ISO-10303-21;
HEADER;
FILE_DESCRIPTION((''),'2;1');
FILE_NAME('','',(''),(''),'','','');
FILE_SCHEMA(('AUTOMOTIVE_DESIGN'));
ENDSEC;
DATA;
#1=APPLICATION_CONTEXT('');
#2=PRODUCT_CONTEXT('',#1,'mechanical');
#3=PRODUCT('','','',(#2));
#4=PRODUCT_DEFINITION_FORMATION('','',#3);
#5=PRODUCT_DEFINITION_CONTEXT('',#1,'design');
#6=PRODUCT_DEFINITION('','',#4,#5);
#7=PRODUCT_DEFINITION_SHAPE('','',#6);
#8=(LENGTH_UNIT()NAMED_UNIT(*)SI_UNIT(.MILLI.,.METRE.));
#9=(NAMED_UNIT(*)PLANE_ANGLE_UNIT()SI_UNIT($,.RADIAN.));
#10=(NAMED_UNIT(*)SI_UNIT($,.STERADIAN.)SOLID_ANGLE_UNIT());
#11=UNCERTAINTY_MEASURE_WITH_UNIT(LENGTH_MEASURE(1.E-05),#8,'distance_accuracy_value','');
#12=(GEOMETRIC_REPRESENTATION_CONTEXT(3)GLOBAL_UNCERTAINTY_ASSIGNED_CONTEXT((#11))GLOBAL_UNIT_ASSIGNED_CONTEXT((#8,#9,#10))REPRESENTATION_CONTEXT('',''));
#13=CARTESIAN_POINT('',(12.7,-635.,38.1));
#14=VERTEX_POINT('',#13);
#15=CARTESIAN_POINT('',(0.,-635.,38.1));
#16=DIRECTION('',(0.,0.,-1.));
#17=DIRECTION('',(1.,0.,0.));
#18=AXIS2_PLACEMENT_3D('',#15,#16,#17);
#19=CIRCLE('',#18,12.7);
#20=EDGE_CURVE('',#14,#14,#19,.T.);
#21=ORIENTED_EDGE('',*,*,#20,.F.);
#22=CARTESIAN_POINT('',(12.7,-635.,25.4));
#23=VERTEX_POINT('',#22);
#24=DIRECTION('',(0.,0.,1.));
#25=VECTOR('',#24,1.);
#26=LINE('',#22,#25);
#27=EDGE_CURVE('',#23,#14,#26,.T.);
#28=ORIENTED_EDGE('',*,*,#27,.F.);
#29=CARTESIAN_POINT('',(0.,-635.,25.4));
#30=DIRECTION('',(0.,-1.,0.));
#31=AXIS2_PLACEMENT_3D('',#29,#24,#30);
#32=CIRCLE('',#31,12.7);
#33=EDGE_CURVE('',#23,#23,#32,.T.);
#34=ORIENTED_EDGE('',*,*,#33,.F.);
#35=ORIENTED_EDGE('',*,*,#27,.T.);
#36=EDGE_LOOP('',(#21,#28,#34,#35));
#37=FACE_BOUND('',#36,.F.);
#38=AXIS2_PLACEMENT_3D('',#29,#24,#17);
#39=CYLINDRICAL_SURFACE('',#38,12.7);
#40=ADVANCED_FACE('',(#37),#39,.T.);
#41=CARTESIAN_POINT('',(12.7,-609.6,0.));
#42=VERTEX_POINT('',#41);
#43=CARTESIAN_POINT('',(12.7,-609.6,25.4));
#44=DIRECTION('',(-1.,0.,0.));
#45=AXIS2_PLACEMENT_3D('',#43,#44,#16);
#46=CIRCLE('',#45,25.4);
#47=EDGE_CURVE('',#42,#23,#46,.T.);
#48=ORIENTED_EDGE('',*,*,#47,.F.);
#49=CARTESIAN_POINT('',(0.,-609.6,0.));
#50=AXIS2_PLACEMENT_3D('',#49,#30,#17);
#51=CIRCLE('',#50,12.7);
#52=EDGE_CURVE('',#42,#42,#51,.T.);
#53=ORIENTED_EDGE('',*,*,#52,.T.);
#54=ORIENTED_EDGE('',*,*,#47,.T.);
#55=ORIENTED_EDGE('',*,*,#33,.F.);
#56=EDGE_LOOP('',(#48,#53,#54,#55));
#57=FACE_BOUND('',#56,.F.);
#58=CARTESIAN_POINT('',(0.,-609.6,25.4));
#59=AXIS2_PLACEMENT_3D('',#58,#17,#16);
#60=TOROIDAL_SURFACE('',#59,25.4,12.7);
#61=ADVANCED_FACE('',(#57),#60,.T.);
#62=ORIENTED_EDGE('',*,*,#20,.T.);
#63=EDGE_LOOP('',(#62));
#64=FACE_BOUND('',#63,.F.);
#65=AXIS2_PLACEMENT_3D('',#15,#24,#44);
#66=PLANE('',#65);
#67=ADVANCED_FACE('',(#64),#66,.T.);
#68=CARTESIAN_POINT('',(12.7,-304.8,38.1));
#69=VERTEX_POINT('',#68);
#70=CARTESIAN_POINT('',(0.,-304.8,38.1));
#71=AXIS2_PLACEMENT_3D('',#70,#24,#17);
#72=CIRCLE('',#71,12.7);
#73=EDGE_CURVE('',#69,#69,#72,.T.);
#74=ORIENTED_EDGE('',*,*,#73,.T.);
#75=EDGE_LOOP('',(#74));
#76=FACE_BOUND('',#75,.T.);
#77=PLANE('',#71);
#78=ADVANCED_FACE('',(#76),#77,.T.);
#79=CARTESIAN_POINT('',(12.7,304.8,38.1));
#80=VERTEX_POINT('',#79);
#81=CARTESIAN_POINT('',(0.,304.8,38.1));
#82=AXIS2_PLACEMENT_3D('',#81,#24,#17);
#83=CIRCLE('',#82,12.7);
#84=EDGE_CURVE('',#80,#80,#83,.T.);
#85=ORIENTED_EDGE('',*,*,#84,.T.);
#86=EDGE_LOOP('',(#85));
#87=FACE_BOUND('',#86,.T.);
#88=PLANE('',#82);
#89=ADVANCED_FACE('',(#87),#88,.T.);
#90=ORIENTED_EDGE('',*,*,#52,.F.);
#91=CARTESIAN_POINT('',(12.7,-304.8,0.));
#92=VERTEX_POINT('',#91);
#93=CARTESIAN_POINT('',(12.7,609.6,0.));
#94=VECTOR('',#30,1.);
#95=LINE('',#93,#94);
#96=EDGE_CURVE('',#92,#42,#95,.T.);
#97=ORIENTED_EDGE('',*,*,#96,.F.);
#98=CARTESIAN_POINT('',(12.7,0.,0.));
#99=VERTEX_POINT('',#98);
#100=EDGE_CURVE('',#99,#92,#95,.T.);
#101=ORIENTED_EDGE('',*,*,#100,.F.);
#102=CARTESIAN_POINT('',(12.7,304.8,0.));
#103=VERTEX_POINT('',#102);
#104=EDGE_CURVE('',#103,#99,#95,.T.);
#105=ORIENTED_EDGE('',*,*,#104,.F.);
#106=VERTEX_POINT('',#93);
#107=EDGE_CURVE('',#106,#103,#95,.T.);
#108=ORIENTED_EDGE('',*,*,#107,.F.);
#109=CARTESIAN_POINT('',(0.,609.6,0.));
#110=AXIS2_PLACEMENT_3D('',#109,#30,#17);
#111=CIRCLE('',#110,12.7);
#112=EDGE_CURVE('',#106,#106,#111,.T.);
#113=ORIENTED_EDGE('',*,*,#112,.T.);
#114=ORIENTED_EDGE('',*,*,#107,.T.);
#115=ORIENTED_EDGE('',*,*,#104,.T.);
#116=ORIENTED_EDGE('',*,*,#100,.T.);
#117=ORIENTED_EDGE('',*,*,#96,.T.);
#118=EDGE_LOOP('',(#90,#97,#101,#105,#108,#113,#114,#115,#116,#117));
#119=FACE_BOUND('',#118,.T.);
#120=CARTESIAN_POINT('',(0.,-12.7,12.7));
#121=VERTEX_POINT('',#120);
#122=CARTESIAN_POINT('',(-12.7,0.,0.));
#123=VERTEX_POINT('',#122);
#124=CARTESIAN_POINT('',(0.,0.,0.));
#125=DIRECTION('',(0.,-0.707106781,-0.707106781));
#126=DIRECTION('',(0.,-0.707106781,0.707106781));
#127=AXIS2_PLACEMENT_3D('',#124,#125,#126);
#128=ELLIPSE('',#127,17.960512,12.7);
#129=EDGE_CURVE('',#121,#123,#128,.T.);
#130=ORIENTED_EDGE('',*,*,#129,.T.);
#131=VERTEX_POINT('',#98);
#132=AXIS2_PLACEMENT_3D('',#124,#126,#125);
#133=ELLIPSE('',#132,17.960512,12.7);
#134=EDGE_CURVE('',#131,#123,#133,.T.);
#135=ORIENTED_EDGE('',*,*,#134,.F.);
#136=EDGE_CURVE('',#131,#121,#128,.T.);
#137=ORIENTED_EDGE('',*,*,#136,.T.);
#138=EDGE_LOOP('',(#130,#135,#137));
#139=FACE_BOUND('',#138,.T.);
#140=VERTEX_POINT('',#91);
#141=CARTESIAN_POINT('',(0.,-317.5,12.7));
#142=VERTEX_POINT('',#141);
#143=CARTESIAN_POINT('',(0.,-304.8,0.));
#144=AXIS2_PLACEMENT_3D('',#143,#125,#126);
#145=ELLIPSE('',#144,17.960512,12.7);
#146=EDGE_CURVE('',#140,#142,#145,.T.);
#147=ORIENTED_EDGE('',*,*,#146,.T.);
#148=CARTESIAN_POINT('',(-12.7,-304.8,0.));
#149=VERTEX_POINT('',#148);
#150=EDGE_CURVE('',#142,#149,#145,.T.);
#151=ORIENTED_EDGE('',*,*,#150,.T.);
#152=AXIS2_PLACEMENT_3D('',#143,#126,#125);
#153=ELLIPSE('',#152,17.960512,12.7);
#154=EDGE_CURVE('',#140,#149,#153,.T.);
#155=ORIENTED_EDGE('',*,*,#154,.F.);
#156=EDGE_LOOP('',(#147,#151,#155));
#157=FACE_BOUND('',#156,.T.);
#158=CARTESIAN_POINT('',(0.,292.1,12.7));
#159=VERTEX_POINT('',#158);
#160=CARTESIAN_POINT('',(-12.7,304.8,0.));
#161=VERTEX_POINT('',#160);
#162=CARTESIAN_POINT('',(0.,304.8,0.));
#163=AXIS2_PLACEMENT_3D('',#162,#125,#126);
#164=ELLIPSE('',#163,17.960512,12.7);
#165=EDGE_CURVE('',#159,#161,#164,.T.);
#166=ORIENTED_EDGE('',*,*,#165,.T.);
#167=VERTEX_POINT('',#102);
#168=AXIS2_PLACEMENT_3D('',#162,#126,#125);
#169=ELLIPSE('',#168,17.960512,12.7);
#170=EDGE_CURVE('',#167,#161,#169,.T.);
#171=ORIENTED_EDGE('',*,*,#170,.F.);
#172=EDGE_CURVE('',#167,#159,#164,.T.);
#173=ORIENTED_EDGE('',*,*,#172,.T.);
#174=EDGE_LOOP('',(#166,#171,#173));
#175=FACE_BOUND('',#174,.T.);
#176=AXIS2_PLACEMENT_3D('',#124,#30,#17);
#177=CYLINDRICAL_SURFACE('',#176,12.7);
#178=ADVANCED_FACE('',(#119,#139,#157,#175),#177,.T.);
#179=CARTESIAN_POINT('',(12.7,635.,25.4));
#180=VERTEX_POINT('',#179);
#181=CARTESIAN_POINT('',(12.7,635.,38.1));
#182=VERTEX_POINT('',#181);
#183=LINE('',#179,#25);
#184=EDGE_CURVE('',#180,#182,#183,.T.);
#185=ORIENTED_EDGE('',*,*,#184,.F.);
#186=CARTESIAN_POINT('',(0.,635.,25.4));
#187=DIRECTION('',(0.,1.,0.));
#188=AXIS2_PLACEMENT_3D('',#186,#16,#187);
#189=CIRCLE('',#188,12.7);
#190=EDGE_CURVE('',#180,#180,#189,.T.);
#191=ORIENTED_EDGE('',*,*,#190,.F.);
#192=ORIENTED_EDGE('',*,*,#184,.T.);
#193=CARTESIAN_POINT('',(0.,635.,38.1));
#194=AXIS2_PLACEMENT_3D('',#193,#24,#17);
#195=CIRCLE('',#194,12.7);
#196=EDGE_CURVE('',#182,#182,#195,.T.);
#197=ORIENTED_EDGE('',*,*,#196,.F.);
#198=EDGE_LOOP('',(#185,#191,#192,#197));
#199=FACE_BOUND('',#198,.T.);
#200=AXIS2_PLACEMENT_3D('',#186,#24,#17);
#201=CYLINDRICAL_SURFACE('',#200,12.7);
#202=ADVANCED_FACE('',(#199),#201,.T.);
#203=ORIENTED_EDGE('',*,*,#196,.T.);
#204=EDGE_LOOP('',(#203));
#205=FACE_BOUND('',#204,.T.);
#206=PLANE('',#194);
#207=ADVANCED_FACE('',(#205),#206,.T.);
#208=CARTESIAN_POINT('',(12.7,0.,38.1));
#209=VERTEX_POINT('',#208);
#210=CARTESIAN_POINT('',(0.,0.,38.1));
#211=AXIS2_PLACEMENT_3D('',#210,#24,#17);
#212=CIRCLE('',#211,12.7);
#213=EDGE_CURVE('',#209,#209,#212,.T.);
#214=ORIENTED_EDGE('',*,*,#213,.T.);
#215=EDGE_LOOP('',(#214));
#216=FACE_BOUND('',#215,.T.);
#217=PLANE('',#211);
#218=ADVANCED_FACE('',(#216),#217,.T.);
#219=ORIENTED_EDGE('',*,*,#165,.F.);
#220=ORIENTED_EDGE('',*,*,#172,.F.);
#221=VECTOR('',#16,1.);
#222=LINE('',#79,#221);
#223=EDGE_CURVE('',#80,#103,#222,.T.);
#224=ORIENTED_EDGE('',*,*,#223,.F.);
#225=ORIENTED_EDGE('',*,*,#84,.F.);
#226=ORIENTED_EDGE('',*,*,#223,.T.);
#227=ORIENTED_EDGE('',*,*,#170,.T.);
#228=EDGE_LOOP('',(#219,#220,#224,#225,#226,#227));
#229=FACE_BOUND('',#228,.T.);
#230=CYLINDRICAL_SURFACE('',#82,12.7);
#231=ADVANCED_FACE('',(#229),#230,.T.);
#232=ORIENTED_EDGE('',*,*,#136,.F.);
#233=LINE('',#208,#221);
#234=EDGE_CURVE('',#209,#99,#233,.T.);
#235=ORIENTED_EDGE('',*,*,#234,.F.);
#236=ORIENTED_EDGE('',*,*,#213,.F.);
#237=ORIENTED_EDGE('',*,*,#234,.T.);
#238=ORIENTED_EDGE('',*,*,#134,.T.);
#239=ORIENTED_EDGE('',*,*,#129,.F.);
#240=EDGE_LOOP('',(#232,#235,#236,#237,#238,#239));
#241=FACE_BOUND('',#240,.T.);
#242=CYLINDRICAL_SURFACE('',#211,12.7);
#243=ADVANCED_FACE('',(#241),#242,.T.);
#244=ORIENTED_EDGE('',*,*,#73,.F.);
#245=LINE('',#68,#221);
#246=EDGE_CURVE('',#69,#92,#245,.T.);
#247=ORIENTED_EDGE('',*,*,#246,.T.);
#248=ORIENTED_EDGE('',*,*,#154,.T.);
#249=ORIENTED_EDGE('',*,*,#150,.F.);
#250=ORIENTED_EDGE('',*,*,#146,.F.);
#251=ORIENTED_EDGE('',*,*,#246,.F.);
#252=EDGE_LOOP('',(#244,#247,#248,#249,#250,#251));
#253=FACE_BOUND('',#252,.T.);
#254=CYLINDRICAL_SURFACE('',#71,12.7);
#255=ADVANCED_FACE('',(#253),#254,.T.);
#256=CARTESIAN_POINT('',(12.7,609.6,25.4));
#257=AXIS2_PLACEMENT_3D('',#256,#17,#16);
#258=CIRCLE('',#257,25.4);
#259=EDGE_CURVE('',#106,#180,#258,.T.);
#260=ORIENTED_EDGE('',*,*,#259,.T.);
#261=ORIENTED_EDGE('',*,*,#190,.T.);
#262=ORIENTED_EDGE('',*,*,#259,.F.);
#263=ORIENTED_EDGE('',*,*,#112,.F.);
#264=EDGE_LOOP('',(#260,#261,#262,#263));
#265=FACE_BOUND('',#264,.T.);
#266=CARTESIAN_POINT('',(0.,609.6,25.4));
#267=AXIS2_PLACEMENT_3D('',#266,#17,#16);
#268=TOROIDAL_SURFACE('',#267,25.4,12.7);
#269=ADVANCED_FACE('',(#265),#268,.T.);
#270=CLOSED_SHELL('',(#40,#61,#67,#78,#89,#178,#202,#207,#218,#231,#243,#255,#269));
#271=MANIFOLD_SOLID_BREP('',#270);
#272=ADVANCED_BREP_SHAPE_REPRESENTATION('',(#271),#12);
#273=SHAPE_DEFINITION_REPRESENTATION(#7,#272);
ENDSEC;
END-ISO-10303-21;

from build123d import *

# Parameters (mm, degrees)
F0_R          = 12.7
F1_DEPTH      = 609.6
F1_DEPTH_BACK = 609.6
F3_R          = 12.7
F8_R          = 12.7


# Not quite as in the source:
# - a pattern or mirror of a feature is missing from the dataset's text; its kind, count and spacing are read off the source's solid


with BuildPart() as f1:
    # F0 (on Front) → F1 (new body, two sides)
    with BuildSketch(Plane.XZ) as f1_sk:
        Circle(F0_R)
    extrude(amount=F1_DEPTH)
    extrude(f1_sk.sketch, amount=-F1_DEPTH_BACK)

    # F5: sweep along a path in F4
    with BuildLine(Plane.YZ) as f5_path:
        ThreePointArc((609.6, 0), (627.5605122421, 7.4394877579), (635, 25.4))
        Line((635, 25.4), (635, 38.1))
    # F3 (on offset) → F5 (sweep)
    with BuildSketch(Plane.XY.offset(38.1)):
        with Locations((0, 635)):
            Circle(F3_R)
    f5 = sweep(path=f5_path.line)

    # F5_copies: F5 across plane
    add(f5.mirror(Plane(origin=(0, 0, 0), x_dir=(0, 0, -1), z_dir=(0, -1, 0))))

    # F8 (on offset) → F9 (join, up to the next surface of F1)
    with BuildSketch(Plane.XY.offset(38.1)):
        with Locations((0, 304.8)):
            Circle(F8_R)
        with Locations((0, -304.8)):
            Circle(F8_R)
        Circle(F8_R)
    extrude(until=Until.NEXT, dir=(0, 0, -1))


solid = f1.part
